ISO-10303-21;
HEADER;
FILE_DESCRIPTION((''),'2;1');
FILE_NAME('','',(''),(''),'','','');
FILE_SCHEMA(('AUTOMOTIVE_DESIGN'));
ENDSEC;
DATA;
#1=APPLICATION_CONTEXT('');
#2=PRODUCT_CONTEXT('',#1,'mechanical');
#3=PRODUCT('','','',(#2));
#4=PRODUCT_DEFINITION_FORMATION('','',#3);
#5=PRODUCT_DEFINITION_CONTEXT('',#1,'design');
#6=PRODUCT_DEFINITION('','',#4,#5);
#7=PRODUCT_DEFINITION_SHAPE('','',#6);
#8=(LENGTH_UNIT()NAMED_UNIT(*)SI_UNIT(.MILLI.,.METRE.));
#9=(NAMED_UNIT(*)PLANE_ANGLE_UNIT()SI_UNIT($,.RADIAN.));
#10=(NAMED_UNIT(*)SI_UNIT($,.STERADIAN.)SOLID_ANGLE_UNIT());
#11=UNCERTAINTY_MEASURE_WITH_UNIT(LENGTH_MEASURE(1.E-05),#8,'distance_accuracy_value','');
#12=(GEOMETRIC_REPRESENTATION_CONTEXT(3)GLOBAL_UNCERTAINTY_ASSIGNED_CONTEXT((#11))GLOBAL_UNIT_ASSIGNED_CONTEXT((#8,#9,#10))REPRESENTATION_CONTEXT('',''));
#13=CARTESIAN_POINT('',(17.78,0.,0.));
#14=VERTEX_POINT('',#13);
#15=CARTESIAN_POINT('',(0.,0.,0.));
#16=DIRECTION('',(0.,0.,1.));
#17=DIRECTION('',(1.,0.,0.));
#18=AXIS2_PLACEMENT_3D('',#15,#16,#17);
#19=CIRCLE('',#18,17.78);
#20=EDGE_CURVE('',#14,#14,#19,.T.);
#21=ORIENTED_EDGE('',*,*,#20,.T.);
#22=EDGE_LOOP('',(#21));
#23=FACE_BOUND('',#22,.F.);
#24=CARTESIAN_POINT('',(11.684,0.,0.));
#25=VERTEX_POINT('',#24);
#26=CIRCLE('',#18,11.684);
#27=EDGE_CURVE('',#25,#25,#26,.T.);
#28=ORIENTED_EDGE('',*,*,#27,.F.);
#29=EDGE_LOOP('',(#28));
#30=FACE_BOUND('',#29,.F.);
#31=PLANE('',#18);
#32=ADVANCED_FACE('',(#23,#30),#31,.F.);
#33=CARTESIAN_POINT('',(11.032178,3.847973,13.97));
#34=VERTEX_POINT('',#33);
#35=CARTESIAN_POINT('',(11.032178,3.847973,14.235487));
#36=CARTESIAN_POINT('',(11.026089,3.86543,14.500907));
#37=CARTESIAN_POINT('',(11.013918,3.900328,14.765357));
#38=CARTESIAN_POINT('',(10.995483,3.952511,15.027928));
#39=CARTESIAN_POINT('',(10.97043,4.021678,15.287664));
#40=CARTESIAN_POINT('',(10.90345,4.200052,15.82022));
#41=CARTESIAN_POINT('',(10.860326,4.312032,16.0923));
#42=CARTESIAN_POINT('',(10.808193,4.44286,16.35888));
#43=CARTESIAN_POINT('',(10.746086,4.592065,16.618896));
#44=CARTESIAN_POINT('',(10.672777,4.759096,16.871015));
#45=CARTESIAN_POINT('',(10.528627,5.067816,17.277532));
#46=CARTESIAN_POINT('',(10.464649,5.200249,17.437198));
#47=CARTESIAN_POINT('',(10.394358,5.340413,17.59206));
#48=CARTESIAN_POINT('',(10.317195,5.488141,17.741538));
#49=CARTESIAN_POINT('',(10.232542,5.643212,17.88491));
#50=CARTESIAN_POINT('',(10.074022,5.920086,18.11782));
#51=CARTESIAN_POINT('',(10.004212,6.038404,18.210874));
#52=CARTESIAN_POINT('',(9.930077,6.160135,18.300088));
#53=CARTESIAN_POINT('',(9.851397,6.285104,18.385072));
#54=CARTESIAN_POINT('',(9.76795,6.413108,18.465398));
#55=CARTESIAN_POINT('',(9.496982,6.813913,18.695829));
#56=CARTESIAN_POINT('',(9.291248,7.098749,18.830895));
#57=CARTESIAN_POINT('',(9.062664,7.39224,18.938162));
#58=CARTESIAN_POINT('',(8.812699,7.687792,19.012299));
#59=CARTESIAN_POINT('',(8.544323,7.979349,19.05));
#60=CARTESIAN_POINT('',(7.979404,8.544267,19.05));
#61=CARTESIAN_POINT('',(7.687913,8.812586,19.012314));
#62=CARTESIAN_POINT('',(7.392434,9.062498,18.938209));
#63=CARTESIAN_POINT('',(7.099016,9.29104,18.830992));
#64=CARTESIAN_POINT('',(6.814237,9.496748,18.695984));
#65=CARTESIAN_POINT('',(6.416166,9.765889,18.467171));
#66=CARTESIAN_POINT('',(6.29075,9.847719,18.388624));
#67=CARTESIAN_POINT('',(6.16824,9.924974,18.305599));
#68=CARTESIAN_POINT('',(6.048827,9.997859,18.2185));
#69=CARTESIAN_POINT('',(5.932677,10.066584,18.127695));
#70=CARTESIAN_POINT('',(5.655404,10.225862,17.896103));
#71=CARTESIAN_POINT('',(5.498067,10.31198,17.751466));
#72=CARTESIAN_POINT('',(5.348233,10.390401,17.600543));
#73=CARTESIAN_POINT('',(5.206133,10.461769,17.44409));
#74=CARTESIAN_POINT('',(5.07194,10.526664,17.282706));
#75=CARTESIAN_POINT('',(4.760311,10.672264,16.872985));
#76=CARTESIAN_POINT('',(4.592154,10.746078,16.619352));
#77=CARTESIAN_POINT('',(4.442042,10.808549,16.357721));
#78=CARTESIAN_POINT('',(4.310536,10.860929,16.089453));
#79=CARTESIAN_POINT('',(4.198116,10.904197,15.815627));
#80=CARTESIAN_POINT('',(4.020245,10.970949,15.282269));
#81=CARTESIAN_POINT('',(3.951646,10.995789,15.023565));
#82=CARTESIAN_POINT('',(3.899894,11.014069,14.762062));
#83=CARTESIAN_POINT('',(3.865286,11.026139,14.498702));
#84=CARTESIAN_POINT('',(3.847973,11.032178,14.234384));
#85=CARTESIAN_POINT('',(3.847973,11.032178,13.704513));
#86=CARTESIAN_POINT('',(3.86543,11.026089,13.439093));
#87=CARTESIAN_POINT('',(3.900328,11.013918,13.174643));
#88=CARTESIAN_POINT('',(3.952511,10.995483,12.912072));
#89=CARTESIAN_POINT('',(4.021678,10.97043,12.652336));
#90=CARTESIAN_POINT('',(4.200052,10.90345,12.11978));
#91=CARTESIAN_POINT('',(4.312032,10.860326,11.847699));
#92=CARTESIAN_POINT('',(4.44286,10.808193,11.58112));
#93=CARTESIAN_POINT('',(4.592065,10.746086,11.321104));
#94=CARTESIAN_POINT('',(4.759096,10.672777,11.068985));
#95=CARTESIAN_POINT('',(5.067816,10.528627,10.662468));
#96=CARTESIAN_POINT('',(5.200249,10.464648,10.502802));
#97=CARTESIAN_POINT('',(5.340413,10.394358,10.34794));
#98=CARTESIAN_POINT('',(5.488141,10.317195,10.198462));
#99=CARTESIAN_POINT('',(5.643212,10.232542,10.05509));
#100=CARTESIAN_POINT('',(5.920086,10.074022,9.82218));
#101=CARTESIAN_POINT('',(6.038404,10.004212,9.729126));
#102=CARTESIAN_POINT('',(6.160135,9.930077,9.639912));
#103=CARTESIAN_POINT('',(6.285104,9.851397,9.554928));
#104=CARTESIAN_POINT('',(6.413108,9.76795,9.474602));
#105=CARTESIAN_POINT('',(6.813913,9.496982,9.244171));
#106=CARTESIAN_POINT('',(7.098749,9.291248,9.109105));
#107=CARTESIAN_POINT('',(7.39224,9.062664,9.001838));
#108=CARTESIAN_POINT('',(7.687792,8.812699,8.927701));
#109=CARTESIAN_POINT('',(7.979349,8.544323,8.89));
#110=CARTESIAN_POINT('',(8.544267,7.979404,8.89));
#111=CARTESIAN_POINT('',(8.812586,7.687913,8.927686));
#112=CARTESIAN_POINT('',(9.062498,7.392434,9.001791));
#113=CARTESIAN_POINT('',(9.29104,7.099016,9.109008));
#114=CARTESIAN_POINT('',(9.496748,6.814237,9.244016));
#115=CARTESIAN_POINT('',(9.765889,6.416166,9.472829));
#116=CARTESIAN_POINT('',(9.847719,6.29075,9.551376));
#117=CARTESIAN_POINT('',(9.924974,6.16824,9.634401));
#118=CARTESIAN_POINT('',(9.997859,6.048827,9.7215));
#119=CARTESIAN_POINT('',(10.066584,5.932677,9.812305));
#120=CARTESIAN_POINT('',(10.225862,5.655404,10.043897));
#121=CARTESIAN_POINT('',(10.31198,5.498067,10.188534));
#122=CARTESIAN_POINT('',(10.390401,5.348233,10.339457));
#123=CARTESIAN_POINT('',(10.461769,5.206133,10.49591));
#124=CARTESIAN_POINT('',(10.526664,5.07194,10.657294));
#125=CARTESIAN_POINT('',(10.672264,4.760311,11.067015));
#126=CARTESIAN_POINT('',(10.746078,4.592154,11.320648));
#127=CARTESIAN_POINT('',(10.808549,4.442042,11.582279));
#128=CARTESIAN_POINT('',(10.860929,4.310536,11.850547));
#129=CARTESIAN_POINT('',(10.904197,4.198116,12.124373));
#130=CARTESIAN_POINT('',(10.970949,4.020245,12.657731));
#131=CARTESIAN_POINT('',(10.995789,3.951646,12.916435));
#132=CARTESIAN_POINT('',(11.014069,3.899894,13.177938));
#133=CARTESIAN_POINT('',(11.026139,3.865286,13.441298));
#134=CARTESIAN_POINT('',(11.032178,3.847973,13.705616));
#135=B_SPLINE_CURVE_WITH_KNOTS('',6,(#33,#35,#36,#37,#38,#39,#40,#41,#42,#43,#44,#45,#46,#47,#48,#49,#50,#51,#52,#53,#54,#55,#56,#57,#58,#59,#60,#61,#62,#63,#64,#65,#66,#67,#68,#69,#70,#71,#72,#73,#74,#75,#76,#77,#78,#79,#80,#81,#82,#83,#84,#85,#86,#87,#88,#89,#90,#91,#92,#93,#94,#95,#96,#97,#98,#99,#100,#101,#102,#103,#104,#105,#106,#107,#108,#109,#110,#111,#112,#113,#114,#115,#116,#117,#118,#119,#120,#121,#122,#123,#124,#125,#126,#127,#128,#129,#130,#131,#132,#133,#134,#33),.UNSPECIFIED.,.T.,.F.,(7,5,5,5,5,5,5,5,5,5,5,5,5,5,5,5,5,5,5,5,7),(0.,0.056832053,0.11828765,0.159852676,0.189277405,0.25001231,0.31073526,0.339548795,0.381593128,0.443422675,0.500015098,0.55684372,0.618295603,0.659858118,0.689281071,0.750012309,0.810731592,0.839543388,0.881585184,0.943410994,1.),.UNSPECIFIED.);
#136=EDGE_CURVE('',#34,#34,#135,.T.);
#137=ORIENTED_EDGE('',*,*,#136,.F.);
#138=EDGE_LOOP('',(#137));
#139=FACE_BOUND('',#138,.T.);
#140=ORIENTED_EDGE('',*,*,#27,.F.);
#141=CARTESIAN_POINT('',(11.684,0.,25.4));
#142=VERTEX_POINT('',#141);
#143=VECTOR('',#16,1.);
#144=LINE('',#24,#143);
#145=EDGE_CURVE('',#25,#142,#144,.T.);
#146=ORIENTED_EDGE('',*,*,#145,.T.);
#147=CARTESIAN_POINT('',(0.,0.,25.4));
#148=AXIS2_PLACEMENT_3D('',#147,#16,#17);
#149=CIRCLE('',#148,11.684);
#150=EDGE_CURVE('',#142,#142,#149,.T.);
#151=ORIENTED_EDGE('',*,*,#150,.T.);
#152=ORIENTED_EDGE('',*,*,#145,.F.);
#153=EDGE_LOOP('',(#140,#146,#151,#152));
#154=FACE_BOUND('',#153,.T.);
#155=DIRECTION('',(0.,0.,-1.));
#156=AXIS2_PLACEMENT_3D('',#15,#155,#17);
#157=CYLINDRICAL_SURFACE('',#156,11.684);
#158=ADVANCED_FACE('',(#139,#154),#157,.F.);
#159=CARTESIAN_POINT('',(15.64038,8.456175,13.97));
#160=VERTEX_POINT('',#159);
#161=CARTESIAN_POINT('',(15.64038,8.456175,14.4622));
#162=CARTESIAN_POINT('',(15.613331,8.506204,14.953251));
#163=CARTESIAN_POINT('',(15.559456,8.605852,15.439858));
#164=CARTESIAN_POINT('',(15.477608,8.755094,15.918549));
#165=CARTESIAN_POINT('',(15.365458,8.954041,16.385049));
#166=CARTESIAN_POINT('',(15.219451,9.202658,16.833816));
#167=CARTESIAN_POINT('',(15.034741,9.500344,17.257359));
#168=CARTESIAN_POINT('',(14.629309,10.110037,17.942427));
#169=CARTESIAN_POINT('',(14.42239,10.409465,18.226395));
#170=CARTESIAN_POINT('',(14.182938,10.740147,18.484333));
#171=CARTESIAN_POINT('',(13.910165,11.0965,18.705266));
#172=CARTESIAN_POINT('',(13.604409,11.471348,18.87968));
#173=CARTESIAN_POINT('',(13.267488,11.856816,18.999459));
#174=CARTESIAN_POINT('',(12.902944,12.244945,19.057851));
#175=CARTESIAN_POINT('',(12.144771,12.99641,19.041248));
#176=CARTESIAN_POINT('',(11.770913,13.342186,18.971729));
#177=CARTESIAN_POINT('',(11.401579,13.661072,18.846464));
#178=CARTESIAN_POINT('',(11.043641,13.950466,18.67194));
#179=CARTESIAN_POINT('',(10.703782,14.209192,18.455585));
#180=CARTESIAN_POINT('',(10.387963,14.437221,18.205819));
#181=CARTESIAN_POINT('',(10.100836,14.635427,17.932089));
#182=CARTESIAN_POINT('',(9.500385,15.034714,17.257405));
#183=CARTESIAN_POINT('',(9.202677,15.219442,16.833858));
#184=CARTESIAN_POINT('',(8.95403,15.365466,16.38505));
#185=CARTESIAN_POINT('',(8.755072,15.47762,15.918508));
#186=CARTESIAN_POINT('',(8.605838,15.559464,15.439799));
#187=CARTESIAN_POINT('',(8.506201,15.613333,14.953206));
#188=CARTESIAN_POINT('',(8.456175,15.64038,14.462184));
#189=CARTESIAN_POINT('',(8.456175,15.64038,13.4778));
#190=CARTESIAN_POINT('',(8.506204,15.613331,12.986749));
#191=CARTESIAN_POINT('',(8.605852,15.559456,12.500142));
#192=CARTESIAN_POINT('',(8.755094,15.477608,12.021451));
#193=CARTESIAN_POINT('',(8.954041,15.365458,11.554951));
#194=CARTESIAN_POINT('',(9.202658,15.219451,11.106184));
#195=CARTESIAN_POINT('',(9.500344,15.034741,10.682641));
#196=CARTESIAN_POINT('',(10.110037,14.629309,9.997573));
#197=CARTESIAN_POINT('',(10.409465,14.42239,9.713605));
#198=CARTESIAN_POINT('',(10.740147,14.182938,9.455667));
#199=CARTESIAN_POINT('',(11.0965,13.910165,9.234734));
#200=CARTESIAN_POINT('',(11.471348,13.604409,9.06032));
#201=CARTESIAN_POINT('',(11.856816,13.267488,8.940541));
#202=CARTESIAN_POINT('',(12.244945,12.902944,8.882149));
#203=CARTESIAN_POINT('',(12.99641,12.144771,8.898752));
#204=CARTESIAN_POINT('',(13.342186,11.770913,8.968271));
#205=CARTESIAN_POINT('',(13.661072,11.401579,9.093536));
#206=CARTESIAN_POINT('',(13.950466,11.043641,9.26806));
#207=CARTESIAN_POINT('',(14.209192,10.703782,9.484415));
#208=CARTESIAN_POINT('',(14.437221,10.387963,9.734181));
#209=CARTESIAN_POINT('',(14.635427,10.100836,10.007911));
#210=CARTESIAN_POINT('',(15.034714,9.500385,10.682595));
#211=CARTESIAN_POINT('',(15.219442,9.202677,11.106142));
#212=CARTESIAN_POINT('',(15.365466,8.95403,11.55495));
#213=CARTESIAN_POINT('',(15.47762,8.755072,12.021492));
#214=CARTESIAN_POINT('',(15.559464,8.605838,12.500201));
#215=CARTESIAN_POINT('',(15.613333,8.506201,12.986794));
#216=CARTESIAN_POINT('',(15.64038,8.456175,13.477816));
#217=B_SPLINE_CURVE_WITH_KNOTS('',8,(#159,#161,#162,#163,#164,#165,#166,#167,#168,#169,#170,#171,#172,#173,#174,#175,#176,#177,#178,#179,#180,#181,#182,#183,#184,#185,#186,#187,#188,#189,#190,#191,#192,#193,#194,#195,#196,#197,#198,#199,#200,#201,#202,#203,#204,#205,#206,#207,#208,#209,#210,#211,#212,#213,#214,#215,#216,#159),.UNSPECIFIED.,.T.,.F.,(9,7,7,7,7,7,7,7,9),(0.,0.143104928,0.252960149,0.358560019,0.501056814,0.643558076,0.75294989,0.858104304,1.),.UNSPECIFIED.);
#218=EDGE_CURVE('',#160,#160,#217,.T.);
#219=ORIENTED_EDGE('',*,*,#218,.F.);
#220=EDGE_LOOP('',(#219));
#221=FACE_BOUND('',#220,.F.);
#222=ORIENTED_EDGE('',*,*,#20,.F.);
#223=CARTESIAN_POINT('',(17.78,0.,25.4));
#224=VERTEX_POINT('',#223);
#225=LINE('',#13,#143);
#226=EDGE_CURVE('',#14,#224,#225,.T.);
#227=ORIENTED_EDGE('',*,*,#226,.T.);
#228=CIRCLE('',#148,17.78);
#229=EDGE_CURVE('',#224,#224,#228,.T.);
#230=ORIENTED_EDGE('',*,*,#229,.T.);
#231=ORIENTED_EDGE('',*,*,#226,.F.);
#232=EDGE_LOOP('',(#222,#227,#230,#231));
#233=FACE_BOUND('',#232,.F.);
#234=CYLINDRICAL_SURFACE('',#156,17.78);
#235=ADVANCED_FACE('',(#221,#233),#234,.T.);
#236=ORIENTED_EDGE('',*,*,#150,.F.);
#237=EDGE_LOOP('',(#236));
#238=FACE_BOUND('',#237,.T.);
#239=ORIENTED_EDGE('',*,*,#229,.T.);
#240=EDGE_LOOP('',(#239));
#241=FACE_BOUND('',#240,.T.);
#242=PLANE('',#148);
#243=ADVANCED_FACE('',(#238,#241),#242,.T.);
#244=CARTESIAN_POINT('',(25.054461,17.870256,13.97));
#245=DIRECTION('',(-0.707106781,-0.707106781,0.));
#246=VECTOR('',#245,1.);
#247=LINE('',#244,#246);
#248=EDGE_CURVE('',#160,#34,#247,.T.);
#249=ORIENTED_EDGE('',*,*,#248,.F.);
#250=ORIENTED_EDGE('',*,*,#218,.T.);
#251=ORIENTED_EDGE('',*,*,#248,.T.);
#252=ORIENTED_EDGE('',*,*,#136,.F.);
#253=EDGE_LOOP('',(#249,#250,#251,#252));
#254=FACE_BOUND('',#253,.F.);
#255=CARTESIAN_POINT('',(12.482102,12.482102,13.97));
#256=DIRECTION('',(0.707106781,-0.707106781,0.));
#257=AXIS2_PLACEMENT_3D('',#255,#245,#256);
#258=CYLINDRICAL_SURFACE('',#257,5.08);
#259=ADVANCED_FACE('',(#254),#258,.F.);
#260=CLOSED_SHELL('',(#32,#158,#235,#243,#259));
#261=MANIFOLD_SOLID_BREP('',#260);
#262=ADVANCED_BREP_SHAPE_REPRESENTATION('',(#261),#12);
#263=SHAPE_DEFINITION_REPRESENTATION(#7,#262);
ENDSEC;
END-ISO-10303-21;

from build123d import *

# Parameters (mm, degrees)
F0_R     = 17.78
F0_R_2   = 11.684
F1_DEPTH = 25.4
F6_R     = 5.08
F7_DEPTH = 12.7


with BuildPart() as f1:
    # F0 (on Top) → F1 (new body)
    with BuildSketch(Plane.XY):
        Circle(F0_R)
        Circle(F0_R_2, mode=Mode.SUBTRACT)
    extrude(amount=F1_DEPTH)

    # F6 (on face) → F7 (cut, symmetric)
    with BuildSketch(Plane(origin=(12.4821024484, 12.4821024484, 0), x_dir=(0.7071067812, -0.7071067812, 0), z_dir=(-0.7071067812, -0.7071067812, 0))):
        with Locations((0, 13.97)):
            Circle(F6_R)
    extrude(amount=F7_DEPTH, both=True, mode=Mode.SUBTRACT)


solid = f1.part
